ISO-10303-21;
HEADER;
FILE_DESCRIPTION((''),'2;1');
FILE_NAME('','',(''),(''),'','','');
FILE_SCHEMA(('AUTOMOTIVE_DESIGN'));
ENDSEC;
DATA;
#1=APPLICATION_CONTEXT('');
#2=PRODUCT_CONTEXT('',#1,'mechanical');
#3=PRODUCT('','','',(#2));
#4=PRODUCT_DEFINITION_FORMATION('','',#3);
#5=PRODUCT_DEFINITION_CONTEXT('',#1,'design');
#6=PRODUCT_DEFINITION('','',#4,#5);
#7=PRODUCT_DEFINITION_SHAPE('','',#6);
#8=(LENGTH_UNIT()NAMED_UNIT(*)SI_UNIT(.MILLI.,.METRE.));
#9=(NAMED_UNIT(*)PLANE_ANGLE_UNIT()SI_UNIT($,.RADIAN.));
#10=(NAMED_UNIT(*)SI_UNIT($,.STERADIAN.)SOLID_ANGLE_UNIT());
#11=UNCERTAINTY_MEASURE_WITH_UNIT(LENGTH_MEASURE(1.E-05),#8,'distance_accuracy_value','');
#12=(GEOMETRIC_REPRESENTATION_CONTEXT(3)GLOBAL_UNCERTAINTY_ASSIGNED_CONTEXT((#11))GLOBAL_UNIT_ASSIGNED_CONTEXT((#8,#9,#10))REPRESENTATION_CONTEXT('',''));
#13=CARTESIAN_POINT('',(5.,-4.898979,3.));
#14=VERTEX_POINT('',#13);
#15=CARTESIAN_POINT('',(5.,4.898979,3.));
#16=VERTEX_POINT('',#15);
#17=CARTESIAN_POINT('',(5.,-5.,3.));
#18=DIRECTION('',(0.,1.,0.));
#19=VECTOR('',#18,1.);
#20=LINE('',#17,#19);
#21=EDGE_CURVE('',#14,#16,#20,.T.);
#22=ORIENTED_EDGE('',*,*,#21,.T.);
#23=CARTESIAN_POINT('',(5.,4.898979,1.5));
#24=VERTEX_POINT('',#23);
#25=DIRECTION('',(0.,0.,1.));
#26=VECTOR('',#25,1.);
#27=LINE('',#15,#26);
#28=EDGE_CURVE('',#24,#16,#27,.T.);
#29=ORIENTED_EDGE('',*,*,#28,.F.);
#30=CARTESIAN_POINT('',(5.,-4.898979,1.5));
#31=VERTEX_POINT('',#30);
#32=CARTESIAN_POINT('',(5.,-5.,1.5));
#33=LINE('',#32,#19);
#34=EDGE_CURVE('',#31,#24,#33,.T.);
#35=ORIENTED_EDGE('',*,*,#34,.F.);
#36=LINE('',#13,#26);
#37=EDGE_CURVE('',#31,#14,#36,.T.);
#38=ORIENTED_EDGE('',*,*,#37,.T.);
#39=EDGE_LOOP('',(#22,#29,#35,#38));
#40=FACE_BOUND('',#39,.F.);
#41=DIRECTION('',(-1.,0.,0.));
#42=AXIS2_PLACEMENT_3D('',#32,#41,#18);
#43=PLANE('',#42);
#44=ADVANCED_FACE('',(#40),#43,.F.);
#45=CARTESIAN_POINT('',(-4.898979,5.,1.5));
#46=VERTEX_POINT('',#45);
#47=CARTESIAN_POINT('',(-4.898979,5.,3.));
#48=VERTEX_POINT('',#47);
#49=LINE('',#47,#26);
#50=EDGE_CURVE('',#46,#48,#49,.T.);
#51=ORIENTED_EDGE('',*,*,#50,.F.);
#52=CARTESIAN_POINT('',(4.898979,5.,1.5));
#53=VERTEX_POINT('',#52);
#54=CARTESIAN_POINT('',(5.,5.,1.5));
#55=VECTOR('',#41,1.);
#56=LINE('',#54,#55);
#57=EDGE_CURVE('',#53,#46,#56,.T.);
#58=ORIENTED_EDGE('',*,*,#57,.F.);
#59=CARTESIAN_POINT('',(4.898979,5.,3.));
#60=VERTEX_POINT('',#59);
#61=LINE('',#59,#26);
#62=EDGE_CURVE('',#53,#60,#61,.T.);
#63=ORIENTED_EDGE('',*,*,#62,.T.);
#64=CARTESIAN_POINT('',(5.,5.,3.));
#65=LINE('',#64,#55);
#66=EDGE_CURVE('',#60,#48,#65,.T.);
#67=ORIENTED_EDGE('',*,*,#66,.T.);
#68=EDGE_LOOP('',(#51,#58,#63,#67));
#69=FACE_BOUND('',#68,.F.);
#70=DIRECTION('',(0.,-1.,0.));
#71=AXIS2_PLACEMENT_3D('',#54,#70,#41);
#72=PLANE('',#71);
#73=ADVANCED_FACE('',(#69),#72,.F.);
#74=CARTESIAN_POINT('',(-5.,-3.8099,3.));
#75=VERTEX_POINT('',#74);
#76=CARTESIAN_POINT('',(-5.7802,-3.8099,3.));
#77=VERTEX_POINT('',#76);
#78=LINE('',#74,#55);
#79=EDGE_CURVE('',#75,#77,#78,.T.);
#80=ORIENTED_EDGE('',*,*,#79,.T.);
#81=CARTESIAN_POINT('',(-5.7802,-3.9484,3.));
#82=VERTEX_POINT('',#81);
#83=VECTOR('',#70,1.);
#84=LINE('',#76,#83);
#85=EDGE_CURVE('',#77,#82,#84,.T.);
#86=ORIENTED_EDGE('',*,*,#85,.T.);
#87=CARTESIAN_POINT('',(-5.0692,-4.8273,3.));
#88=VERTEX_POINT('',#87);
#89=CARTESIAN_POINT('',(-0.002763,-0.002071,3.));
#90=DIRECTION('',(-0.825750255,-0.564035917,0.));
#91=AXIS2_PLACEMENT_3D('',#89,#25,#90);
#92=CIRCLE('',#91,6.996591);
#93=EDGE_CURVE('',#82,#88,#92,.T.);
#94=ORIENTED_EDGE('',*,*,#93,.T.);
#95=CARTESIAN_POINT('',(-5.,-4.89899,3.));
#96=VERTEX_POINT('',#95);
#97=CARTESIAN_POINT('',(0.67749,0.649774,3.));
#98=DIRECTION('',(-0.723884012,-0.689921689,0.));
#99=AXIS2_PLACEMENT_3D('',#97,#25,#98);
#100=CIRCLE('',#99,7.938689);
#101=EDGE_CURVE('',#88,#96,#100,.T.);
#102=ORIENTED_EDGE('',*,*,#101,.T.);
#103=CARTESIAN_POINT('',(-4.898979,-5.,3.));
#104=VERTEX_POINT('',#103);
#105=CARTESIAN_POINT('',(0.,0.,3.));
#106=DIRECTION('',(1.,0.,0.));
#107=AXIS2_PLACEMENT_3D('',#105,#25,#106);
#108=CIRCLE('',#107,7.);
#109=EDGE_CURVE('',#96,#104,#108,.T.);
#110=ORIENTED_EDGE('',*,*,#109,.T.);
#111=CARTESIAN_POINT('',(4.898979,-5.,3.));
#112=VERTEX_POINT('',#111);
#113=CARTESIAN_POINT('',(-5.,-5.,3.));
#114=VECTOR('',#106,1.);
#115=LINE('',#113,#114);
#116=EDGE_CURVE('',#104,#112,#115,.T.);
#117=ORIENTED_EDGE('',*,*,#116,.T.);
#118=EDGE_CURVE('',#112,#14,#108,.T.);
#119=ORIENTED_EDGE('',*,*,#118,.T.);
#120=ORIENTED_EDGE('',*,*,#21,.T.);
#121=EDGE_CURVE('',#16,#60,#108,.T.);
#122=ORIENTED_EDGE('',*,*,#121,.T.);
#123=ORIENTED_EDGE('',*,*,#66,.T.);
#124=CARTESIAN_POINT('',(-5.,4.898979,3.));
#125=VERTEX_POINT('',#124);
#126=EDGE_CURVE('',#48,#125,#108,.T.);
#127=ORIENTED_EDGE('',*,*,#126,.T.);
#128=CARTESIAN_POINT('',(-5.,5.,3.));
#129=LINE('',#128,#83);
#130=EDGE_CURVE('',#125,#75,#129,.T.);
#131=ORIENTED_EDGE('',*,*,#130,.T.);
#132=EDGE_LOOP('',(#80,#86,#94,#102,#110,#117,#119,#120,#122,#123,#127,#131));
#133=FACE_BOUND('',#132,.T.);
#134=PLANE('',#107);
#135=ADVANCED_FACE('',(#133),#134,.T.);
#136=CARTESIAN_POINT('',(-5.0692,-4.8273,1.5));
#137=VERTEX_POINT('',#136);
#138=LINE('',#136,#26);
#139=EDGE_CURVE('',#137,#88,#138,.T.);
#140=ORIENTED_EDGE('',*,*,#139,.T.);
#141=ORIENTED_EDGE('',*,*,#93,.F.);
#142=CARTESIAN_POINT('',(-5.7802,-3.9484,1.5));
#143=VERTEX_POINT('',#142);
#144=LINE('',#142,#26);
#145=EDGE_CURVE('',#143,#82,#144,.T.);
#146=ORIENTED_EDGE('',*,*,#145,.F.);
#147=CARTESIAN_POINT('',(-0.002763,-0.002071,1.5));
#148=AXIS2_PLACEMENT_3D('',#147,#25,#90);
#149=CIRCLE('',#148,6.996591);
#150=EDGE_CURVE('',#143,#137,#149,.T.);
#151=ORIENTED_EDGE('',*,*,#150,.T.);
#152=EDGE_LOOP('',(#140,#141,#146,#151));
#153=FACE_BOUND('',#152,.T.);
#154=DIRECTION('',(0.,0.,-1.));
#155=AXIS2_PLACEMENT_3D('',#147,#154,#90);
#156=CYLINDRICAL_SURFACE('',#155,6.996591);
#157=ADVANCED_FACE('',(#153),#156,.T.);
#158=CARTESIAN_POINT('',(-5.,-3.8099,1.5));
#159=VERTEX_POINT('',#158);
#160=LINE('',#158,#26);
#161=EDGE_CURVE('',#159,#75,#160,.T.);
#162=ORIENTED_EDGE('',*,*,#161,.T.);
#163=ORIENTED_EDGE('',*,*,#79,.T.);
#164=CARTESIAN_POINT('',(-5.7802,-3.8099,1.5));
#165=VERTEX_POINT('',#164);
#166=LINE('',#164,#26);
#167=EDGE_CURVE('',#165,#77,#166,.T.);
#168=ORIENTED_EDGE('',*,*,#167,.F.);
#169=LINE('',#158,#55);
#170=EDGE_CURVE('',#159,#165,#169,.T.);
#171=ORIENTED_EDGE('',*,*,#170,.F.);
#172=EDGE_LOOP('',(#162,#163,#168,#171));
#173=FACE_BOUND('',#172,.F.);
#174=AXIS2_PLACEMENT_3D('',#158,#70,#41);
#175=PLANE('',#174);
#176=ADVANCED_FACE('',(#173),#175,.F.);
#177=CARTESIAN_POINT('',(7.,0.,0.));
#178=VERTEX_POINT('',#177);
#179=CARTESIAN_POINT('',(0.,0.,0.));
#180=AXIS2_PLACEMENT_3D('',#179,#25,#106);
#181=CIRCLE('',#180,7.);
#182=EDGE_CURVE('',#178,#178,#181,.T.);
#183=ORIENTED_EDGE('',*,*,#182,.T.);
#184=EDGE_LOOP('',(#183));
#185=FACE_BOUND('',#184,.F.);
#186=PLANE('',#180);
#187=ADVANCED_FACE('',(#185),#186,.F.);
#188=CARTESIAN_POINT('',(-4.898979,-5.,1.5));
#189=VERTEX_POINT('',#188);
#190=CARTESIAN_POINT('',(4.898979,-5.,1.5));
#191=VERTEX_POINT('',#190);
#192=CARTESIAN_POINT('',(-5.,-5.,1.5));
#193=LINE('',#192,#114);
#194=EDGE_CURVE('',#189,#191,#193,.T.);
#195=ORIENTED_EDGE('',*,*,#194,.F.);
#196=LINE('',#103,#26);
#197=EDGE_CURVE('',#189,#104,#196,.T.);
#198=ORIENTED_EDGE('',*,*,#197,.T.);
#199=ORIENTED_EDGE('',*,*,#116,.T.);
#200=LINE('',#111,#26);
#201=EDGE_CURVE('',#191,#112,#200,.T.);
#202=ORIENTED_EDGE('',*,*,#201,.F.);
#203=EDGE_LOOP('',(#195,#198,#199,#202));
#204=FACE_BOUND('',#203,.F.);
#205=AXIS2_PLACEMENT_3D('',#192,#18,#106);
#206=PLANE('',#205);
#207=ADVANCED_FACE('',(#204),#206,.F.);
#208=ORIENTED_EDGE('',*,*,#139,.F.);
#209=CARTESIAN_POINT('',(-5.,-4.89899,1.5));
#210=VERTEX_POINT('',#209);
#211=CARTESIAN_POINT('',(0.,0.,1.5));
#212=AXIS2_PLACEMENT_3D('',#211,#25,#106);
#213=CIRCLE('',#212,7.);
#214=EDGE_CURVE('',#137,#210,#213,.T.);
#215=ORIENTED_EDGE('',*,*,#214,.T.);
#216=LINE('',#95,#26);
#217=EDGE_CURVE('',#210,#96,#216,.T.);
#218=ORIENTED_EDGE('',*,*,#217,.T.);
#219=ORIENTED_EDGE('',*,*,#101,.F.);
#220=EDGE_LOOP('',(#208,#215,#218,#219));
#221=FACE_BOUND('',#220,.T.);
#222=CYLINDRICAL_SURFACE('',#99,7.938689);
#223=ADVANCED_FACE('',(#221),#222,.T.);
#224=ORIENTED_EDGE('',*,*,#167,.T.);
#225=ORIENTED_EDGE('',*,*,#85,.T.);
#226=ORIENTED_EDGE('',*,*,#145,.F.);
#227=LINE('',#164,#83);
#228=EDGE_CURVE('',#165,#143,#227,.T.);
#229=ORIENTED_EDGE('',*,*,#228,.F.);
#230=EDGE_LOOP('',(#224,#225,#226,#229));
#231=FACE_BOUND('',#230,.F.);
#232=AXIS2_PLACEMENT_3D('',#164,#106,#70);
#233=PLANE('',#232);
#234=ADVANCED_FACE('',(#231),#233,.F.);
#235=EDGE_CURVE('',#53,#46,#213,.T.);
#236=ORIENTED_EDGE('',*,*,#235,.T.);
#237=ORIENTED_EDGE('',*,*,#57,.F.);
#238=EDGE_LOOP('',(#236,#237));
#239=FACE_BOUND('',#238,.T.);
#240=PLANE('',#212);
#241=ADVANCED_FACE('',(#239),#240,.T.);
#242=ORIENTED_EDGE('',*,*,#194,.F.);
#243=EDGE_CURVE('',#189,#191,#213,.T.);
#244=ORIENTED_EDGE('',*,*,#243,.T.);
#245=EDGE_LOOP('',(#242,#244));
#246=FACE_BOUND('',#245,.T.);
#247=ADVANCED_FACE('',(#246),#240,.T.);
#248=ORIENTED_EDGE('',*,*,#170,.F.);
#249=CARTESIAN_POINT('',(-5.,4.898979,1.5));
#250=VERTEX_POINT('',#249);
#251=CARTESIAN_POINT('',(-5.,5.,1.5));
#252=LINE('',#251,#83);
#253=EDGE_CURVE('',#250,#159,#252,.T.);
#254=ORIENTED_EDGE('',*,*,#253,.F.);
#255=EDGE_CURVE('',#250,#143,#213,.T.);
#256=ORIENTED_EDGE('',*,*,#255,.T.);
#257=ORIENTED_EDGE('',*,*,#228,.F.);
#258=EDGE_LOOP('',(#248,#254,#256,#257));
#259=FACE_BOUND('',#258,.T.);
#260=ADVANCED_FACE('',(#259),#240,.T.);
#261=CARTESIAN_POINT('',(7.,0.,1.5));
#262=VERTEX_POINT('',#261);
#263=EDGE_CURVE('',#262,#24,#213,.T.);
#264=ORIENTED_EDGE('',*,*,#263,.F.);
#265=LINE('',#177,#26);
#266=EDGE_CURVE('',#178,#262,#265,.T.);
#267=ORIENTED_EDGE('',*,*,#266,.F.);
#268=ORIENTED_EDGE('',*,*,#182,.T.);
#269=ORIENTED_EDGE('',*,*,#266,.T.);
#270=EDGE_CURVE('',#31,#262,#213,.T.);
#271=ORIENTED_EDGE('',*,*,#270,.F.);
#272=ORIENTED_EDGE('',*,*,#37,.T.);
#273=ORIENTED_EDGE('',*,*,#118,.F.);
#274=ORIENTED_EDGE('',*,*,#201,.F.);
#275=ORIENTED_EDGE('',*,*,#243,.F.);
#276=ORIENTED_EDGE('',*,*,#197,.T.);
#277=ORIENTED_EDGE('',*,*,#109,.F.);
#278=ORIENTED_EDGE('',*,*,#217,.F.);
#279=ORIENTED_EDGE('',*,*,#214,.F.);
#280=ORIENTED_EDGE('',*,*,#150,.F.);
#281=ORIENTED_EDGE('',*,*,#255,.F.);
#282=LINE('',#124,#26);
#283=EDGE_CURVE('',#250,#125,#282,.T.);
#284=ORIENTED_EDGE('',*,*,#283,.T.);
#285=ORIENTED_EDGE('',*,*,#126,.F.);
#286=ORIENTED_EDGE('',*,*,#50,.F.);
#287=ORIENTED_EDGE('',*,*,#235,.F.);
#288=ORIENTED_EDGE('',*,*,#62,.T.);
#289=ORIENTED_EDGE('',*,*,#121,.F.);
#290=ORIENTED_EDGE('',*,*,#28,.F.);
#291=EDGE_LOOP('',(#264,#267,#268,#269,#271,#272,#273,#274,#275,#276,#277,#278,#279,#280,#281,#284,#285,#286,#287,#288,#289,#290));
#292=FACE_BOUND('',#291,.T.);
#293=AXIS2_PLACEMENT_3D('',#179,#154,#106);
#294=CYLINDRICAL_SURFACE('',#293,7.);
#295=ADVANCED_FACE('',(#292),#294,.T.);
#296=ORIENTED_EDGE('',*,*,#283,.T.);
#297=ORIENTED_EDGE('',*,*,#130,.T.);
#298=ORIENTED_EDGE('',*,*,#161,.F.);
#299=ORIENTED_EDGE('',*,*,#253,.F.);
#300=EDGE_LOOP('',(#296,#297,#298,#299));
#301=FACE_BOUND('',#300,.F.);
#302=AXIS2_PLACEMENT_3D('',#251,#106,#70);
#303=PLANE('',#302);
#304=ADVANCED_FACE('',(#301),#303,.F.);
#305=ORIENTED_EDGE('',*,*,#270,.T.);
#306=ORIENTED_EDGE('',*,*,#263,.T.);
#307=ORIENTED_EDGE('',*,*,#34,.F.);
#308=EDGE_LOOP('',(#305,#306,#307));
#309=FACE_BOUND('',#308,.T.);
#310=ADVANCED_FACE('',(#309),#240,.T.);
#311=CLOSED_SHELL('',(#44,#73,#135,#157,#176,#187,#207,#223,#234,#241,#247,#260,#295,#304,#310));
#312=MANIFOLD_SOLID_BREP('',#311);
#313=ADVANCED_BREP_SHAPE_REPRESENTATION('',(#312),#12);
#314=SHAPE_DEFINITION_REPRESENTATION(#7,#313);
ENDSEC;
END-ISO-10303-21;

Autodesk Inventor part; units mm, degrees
ref_plane "YZ Plane" through (0, 0, 0) normal (1, 0, 0) x (0, 1, 0)
ref_plane "XZ Plane" through (0, 0, 0) normal (0, 1, 0) x (-1, 0, 0)
ref_plane "XY Plane" through (0, 0, 0) normal (0, 0, 1) x (1, 0, 0)
sketch "Skizze1" plane through (0, 0, 0) normal (0, 0, 1) x (1, 0, 0)
  circle A0 centre (0, 0) radius 7
  line L0 (-5, 5) -> (5, 5) construction
  line L1 (5, 5) -> (5, -5) construction
  line L2 (5, -5) -> (-5, -5) construction
  line L3 (-5, -5) -> (-5, 5) construction
  line L4 (-5, 5) -> (5, -5) construction
  line L5 (5, 5) -> (-5, -5) construction
  dimension "d0" = 14
  dimension "d1" = 10
  dimension "d2" = 10
extrude "Extrusion1" add sketch "Skizze1" along normal blind 1.5
sketch "Skizze4" plane through (0, 0, 1.5) normal (0, 0, 1) x (1, 0, 0)
  circle A0 centre (0, 0) radius 7 construction
  line L0 (-5, -5) -> (5, -5)
  line L1 (5, -5) -> (5, 5)
  line L2 (5, 5) -> (-5, 5)
  line L3 (-5, 5) -> (-5, -5)
  line L4 (-5, -5) -> (5, 5) construction
  line L5 (5, -5) -> (-5, 5) construction
  dimension "d9" = 10
  dimension "d10" = 10
extrude "Extrusion3" add sketch "Skizze4" along normal blind 1.5
sketch "Skizze5" plane through (0, 0, 3) normal (0, 0, 1) x (1, 0, 0)
  circle A0 centre (0, 0) radius 7
  circle A1 centre (0, 0) radius 7.3678
extrude "Extrusion4" cut sketch "Skizze5" against normal through all
sketch "Skizze6" plane through (0, 0, 1.5) normal (0, 0, 1) x (1, 0, 0)
  arc A0 (-5.7802, -3.9484) -> (-5, -4.899) centre (0, 0) ccw
  line L0 (-5, 4.899) -> (-5, -4.899) projected
  line L1 (-5, -3.8099) -> (-5.7802, -3.8099)
  line L2 (-5.7802, -3.8099) -> (-5.7802, -3.9484)
  line L3 (-5.0692, -4.8273) -> (-5, -4.8273)
  line L4 (-5, -4.8273) -> (-5, -3.8099)
extrude "Extrusion5" add sketch "Skizze6" along normal up to surface (1.5 mm away) contours L2 L1 L0 L3 A0
sketch "Skizze7" plane through (0, 0, 3) normal (0, 0, 1) x (1, 0, 0)
  arc A0 (-5.0692, -4.8273) -> (-5, -4.899) centre (0, 0) ccw projected
  line L0 (-5, -4.8273) -> (-5, -4.899) projected
  line L1 (-5, -4.8273) -> (-5.0692, -4.8273) projected
extrude "Extrusion6" add sketch "Skizze7" against normal up to surface (1.5 mm away)
properties part number "aruco_chip"
